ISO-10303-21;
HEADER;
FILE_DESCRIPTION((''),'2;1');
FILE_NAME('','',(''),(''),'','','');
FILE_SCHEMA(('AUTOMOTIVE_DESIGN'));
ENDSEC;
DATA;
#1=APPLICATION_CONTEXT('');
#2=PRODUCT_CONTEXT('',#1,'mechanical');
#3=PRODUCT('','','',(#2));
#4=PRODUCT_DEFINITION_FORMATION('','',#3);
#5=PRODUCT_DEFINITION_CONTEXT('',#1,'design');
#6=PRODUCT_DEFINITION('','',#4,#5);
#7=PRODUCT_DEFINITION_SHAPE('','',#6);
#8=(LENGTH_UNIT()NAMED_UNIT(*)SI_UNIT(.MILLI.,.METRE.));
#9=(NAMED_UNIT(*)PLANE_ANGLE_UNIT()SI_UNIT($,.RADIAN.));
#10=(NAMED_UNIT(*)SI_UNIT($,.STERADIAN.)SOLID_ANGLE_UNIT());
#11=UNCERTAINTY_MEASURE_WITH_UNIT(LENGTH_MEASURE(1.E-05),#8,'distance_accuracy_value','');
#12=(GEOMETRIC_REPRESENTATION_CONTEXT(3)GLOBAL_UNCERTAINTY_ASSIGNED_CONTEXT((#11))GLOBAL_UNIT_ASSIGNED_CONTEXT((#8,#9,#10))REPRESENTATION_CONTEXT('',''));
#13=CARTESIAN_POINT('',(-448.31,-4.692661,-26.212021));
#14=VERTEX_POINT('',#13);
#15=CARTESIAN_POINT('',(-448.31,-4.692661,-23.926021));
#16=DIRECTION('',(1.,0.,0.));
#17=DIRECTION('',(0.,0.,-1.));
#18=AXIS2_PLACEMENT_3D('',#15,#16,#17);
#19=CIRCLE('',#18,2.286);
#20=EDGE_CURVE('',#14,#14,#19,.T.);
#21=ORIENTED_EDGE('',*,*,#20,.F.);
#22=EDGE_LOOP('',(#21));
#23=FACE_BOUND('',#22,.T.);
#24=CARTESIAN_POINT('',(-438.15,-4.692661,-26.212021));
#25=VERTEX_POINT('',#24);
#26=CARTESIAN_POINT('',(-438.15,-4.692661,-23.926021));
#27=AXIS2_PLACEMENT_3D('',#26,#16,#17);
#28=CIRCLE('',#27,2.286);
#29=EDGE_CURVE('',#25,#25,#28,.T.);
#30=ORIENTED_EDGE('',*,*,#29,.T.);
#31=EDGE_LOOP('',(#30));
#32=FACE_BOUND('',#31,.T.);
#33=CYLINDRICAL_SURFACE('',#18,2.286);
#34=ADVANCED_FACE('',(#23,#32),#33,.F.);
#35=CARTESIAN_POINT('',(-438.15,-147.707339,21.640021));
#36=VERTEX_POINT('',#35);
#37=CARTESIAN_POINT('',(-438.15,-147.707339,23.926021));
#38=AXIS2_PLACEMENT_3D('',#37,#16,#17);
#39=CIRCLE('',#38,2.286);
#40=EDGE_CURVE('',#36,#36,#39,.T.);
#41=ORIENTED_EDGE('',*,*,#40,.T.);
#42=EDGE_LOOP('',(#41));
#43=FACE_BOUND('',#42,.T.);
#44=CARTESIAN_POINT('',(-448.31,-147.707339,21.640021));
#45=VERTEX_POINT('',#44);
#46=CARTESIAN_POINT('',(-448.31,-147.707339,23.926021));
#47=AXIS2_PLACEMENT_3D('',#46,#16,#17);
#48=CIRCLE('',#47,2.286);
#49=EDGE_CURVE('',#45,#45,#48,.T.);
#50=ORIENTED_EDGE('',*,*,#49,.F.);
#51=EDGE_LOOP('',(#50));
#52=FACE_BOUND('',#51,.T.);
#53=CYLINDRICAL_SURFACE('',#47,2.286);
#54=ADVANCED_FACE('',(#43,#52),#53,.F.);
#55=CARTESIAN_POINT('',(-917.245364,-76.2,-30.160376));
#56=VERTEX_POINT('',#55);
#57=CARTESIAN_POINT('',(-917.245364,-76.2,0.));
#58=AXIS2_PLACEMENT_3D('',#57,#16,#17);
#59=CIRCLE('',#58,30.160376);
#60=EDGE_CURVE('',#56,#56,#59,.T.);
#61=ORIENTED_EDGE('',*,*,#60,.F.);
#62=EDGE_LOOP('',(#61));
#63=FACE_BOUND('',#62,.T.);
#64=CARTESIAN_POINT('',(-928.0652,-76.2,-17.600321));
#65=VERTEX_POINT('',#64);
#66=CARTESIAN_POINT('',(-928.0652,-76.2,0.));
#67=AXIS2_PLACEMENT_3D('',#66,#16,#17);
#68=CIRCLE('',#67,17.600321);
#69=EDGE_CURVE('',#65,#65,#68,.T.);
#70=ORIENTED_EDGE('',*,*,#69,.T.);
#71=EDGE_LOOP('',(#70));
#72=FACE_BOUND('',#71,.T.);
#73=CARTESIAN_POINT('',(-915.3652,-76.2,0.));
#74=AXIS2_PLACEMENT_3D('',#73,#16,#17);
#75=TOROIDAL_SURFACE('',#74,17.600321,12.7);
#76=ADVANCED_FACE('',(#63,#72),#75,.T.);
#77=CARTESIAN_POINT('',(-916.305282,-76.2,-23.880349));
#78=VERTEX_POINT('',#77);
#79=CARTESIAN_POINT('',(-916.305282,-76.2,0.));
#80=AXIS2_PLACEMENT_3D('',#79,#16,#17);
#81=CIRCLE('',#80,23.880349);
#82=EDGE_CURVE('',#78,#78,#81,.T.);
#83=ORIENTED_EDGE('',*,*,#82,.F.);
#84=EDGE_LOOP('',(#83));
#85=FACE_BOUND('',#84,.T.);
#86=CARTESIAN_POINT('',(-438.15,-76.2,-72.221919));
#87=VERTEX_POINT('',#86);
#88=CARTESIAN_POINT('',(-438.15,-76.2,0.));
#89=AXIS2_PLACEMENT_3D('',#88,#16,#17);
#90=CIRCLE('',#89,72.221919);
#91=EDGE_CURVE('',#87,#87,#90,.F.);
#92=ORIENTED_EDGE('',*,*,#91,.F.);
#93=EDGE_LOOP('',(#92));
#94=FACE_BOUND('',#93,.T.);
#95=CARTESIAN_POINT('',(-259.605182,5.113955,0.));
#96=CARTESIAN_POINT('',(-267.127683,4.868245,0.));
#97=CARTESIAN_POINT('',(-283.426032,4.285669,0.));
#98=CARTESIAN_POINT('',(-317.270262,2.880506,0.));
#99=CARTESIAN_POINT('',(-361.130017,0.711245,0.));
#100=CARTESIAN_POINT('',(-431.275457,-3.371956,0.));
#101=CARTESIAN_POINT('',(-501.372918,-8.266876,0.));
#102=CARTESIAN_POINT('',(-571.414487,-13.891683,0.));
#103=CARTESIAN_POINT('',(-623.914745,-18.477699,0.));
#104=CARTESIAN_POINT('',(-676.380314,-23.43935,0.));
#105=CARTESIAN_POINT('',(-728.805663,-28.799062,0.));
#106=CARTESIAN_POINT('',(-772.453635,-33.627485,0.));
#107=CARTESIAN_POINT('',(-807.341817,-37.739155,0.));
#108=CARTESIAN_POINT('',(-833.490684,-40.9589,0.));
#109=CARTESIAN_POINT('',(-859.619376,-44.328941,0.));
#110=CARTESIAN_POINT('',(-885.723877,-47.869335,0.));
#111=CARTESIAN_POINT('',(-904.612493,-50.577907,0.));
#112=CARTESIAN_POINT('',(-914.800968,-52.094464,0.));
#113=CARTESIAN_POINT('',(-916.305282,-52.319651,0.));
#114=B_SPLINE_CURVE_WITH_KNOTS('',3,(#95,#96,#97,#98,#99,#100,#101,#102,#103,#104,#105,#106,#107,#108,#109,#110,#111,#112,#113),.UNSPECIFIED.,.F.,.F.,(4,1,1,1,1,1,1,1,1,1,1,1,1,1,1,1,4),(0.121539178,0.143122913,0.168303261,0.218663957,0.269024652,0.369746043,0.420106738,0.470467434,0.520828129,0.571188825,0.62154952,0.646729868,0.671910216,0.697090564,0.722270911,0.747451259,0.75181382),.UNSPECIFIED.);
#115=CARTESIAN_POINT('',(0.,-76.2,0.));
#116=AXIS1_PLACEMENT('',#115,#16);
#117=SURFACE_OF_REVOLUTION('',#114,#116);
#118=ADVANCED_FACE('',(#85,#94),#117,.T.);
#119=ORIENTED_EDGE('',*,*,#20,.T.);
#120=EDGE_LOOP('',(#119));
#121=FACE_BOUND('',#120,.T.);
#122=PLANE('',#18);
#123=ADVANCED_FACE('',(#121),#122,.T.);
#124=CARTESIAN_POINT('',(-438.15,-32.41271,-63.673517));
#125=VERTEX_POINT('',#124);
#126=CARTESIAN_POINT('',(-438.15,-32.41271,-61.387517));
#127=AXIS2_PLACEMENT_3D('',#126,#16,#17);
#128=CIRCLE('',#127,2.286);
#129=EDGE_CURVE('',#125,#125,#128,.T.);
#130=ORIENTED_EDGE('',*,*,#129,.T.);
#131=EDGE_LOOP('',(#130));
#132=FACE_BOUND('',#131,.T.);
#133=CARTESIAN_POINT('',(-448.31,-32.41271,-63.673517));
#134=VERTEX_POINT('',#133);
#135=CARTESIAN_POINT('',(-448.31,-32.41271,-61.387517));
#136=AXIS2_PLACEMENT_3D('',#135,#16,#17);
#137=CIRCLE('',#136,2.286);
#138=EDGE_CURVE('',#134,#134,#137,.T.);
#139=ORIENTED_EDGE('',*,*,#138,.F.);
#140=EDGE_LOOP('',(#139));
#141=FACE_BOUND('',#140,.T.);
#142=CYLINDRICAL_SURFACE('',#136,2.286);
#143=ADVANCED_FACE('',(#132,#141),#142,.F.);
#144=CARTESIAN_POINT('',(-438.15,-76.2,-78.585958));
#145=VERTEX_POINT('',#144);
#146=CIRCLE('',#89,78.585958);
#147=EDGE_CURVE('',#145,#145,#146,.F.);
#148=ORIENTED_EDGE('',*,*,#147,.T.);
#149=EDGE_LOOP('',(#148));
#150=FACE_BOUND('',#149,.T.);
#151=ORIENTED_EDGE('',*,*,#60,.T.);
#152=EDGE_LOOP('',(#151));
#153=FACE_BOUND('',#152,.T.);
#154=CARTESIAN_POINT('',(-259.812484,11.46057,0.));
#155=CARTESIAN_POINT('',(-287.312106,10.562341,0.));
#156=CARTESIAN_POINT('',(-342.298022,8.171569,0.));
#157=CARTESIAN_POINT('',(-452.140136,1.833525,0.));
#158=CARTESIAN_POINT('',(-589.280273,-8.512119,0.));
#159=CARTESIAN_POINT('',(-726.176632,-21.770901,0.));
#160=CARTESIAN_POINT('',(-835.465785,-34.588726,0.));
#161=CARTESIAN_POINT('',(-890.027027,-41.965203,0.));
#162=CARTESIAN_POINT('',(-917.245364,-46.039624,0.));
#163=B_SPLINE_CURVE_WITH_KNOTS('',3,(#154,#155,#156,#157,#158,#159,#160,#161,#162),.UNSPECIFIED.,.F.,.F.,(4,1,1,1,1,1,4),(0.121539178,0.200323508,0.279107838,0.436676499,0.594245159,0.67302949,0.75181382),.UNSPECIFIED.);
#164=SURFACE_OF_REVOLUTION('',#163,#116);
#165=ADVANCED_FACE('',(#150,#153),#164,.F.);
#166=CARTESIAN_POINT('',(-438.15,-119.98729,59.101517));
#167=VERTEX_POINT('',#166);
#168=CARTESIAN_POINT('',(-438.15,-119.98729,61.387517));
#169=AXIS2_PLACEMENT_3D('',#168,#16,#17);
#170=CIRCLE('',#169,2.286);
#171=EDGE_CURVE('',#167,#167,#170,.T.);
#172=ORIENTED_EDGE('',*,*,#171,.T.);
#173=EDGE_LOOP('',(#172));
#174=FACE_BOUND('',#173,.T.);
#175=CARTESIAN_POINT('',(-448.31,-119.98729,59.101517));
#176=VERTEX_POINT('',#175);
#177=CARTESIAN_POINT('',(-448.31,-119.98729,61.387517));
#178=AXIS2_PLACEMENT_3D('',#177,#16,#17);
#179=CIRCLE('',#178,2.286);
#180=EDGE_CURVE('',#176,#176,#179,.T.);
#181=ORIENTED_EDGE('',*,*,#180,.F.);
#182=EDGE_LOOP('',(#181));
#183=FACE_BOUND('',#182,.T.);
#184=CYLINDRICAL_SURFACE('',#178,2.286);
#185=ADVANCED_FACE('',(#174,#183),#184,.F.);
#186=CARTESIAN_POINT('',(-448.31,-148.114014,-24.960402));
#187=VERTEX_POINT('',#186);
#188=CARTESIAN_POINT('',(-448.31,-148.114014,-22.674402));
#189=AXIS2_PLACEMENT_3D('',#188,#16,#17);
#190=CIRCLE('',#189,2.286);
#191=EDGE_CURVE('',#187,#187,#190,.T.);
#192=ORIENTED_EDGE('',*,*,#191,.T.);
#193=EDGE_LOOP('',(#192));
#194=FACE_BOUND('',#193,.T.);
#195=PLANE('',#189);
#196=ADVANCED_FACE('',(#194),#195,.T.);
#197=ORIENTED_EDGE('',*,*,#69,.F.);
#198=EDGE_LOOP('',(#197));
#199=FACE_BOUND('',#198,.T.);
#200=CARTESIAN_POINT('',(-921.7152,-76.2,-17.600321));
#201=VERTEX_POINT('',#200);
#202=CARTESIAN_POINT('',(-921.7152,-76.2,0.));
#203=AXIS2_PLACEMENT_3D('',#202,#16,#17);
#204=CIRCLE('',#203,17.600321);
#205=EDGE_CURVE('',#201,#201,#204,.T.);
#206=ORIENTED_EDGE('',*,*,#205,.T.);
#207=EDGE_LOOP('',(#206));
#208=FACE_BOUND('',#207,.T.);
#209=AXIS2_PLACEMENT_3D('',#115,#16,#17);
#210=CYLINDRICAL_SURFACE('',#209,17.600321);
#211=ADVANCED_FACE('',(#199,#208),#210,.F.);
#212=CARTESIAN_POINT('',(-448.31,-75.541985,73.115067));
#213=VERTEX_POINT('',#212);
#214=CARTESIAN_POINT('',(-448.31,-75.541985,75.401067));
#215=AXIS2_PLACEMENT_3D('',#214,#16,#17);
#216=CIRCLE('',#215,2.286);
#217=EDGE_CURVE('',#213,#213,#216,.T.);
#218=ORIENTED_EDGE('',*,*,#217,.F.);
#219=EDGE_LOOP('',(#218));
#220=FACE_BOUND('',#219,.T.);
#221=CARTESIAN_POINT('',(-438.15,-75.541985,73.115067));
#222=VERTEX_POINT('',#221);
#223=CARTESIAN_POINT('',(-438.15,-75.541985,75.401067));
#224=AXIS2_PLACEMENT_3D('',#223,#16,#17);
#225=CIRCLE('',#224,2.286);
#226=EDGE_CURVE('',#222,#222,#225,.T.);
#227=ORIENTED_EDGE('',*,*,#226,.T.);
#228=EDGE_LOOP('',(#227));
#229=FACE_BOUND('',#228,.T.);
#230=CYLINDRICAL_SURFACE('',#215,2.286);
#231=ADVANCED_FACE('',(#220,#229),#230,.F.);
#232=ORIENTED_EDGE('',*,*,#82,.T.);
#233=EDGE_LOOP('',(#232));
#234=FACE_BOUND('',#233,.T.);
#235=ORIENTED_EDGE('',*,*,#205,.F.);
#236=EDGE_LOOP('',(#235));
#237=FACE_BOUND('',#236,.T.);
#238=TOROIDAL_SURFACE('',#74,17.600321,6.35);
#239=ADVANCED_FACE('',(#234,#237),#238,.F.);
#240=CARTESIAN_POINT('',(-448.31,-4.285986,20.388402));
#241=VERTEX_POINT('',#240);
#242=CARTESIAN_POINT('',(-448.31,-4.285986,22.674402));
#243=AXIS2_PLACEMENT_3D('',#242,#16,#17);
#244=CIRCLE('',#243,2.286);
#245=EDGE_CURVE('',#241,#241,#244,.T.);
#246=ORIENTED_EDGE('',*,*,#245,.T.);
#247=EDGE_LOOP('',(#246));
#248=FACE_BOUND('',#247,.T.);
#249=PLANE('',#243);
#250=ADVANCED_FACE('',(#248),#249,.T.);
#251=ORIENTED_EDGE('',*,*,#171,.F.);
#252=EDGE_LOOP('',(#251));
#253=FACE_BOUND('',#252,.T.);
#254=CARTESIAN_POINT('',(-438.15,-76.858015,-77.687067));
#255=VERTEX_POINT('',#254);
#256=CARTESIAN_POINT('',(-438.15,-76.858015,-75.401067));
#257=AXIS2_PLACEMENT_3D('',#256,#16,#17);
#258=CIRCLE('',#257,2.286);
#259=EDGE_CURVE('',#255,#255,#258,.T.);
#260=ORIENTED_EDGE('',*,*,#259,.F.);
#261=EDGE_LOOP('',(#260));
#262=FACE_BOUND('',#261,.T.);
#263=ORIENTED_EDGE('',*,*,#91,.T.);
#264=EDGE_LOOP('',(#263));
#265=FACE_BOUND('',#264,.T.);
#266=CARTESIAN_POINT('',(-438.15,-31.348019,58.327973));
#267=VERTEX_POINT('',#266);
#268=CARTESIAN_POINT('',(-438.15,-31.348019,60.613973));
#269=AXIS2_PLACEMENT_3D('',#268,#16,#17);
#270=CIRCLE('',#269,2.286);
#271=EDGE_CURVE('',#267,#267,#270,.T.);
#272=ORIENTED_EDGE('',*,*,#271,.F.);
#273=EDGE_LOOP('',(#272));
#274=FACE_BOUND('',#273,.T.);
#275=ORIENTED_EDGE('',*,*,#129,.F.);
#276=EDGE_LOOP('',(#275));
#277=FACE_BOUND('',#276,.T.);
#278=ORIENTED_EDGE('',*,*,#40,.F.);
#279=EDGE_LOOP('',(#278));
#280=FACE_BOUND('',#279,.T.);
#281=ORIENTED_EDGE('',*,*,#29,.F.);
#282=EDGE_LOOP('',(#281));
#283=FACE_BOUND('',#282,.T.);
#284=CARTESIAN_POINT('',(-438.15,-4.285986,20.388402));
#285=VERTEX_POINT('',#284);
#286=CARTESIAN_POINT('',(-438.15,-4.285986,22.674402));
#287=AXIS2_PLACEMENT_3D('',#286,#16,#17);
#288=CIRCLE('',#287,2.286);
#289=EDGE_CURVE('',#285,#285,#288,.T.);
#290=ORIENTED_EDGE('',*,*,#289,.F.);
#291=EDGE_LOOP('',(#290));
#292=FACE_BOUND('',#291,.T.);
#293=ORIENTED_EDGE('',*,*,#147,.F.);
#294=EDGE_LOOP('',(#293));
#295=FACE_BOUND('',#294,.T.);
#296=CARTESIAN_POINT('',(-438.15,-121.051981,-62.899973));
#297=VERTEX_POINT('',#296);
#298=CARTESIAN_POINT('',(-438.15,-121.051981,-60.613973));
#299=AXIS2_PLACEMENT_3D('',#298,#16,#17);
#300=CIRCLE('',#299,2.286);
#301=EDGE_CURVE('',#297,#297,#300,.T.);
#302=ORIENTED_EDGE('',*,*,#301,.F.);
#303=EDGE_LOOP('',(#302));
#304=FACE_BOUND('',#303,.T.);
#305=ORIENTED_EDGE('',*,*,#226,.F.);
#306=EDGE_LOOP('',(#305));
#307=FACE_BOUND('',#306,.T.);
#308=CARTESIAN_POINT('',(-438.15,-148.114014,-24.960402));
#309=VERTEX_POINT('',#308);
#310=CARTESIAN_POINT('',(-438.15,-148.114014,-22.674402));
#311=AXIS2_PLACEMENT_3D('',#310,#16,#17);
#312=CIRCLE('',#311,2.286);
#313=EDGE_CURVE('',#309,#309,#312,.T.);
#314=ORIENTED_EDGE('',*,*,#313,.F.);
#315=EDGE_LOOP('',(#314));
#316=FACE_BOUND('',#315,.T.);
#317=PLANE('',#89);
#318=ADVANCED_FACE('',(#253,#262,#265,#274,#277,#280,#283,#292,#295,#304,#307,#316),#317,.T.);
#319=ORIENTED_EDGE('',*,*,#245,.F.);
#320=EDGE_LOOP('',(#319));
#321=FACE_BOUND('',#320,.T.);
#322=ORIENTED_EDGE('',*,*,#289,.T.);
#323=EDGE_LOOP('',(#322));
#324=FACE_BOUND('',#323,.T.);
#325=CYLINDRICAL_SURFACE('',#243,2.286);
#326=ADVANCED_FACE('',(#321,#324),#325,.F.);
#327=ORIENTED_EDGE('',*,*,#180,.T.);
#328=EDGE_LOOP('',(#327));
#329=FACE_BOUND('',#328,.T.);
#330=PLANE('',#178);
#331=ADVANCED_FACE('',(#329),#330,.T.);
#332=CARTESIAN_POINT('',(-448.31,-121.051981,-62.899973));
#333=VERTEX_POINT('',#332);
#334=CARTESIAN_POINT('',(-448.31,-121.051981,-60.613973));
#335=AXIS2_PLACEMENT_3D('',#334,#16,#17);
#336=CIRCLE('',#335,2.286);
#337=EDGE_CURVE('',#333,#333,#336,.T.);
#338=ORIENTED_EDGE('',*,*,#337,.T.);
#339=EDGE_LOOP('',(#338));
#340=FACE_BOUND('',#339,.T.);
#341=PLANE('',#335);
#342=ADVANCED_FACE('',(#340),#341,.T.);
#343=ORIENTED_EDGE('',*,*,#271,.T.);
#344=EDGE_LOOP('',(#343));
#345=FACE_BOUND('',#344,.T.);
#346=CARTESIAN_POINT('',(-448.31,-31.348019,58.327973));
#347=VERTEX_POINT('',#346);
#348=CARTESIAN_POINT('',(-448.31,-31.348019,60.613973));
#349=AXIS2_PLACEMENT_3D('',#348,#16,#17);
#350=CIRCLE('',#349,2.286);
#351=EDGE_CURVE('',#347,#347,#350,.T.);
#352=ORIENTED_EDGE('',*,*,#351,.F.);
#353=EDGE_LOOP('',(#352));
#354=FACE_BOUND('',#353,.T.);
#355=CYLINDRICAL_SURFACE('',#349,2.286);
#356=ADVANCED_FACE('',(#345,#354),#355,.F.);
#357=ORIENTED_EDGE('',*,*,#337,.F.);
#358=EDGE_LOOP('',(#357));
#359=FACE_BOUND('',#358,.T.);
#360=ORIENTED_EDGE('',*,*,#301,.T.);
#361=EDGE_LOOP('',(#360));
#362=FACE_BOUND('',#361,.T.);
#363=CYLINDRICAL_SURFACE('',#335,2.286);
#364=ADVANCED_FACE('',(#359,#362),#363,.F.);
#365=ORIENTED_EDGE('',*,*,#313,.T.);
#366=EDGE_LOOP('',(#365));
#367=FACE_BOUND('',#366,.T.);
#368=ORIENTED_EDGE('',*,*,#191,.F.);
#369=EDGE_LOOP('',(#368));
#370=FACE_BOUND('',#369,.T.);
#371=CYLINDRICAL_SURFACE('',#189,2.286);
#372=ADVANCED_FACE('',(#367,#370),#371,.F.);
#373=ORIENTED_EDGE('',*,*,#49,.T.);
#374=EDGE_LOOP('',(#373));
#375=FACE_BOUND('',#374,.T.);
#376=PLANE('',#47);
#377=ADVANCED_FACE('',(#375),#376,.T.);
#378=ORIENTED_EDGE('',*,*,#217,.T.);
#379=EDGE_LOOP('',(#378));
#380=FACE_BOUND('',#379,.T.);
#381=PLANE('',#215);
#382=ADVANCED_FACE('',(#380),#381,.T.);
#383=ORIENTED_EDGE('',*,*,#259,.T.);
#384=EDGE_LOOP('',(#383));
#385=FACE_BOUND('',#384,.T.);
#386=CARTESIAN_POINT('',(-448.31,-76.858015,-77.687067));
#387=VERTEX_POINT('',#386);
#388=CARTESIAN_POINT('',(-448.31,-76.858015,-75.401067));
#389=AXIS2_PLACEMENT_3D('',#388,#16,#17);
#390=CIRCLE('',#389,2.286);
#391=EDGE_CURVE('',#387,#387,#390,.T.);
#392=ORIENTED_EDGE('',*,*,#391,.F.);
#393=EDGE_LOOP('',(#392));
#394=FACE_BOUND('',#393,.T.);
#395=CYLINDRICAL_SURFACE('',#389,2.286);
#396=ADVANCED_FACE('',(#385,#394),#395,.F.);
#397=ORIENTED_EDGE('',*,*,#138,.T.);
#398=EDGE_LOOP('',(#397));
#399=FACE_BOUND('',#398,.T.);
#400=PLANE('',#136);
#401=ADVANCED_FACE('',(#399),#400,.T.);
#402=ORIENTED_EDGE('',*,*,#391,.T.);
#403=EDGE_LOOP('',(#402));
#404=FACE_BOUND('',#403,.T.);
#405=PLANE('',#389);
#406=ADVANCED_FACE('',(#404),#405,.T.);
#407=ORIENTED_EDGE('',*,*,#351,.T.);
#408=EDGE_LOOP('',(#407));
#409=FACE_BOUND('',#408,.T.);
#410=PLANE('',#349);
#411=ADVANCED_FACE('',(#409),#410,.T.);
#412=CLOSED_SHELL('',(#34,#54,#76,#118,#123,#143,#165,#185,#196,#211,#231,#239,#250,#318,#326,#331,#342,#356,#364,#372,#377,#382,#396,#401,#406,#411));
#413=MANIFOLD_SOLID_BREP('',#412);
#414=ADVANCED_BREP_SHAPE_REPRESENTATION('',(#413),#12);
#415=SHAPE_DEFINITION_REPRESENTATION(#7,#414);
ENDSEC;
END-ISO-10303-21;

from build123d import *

# Parameters (mm, degrees)
SKETCH8_R          = 142.345864783
CUT_EXTRUDE4_DEPTH = 524.976683945
SKETCH9_R          = 2.286
CUT_EXTRUDE5_DEPTH = 10.16


with BuildPart() as part:
    # Sketch1 → Revolve1 (revolve)
    with BuildSketch(Plane.XY):
        with BuildLine():
            Line((6.35, 11.460570284), (-259.812483715, 11.460570284))
            add(Edge.make_bspline(
                [(-259.812483715, 11.460570284), (-287.31210638, 10.562340852), (-342.298022137, 8.171569009), (-452.140135716, 1.833524736), (-589.280273052, -8.512118808), (-726.176632388, -21.770900754), (-835.465785428, -34.58872614), (-890.027026607, -41.965202762), (-917.245364413, -46.039623622)],
                knots=[0.121539178, 0.121539178, 0.121539178, 0.121539178, 0.200323508, 0.279107838, 0.436676499, 0.594245159, 0.67302949, 0.75181382, 0.75181382, 0.75181382, 0.75181382], degree=3))
            ThreePointArc((-917.245364413, -46.039623622), (-924.987260279, -50.310773033), (-928.0652, -58.599678629))
            Line((-928.0652, -58.599678629), (-921.7152, -58.599678629))
            ThreePointArc((-921.7152, -58.599678629), (-920.17623014, -54.455225831), (-916.305282206, -52.319651125))
            add(Edge.make_bspline(
                [(-259.605182082, 5.113954963), (-267.127682546, 4.868244998), (-283.42603151, 4.285669281), (-317.270262329, 2.880505646), (-361.130016616, 0.711244662), (-431.275457269, -3.371956494), (-501.372917975, -8.266876273), (-571.414486843, -13.891682648), (-623.914744737, -18.477698889), (-676.380314027, -23.439349795), (-728.80566324, -28.799062072), (-772.453634614, -33.627485173), (-807.34181653, -37.739154543), (-833.490683911, -40.958900147), (-859.619375692, -44.328941115), (-885.723877265, -47.869335132), (-904.612492975, -50.577906922), (-914.800968172, -52.094464395), (-916.305282206, -52.319651125)],
                knots=[0.121539178, 0.121539178, 0.121539178, 0.121539178, 0.143122913, 0.168303261, 0.218663957, 0.269024652, 0.369746043, 0.420106738, 0.470467434, 0.520828129, 0.571188825, 0.62154952, 0.646729868, 0.671910216, 0.697090564, 0.722270911, 0.747451259, 0.75181382, 0.75181382, 0.75181382, 0.75181382], degree=3))
            ThreePointArc((-259.605182082, 5.113954963), (-256.399753184, 4.364993874), (-254, 2.11179575))
            ThreePointArc((-254, 2.11179575), (-251.60858665, -0.136927523), (-248.413737762, -0.890953221))
            add(Edge.make_bspline(
                [(0, 0), (-50.8, 0), (-101.6, 0), (-157.182375328, 0), (-166.747125983, 0), (-181.094251966, 0), (-190.659002621, 0), (-199.585120865, 0), (-207.872606698, 0), (-220.304800851, -0.154959839), (-228.589711976, -0.361524821), (-235.094659099, -0.523710542), (-239.819642219, -0.641517002), (-245.046645359, -0.791480258), (-247.911294959, -0.876040976), (-248.413737762, -0.890953221)],
                knots=[0.761574077, 0.761574077, 0.761574077, 0.761574077, 0.907841521, 0.907841521, 0.921611321, 0.935381121, 0.94915092, 0.94915092, 0.961081918, 0.973012916, 0.984943914, 0.984943914, 0.991748303, 0.998552693, 1, 1, 1, 1], degree=3))
            Line((0, 0), (6.35, 0))
            Line((6.35, 0), (6.35, 11.460570284))
        make_face()
    revolve(axis=Axis((0, -76.2, 0), (-1, 0, 0)))

    # Sketch8 → Cut-Extrude4 (cut, through all)
    with BuildSketch(Plane(origin=(-438.15, 0, 0), x_dir=(0, 0, -1), z_dir=(1, 0, 0))):
        with Locations((0, -76.2)):
            Circle(SKETCH8_R)
    extrude(amount=CUT_EXTRUDE4_DEPTH, mode=Mode.SUBTRACT)

    # Sketch9 → Cut-Extrude5 (cut)
    with BuildSketch(Plane(origin=(-438.15, 0, 0), x_dir=(0, 0, -1), z_dir=(1, 0, 0))):
        with Locations((23.926020811, -4.692661383)):
            Circle(SKETCH9_R)
        with Locations((61.387516514, -32.412710015)):
            Circle(SKETCH9_R)
        with Locations((75.401067393, -76.858015146)):
            Circle(SKETCH9_R)
        with Locations((60.613973316, -121.051980857)):
            Circle(SKETCH9_R)
        with Locations((22.674401626, -148.114014343)):
            Circle(SKETCH9_R)
        with Locations((-23.926020811, -147.707338617)):
            Circle(SKETCH9_R)
        with Locations((-61.387516514, -119.987289985)):
            Circle(SKETCH9_R)
        with Locations((-75.401067393, -75.541984854)):
            Circle(SKETCH9_R)
        with Locations((-60.613973316, -31.348019143)):
            Circle(SKETCH9_R)
        with Locations((-22.674401626, -4.285985657)):
            Circle(SKETCH9_R)
    extrude(amount=-CUT_EXTRUDE5_DEPTH, mode=Mode.SUBTRACT)


solid = part.part
